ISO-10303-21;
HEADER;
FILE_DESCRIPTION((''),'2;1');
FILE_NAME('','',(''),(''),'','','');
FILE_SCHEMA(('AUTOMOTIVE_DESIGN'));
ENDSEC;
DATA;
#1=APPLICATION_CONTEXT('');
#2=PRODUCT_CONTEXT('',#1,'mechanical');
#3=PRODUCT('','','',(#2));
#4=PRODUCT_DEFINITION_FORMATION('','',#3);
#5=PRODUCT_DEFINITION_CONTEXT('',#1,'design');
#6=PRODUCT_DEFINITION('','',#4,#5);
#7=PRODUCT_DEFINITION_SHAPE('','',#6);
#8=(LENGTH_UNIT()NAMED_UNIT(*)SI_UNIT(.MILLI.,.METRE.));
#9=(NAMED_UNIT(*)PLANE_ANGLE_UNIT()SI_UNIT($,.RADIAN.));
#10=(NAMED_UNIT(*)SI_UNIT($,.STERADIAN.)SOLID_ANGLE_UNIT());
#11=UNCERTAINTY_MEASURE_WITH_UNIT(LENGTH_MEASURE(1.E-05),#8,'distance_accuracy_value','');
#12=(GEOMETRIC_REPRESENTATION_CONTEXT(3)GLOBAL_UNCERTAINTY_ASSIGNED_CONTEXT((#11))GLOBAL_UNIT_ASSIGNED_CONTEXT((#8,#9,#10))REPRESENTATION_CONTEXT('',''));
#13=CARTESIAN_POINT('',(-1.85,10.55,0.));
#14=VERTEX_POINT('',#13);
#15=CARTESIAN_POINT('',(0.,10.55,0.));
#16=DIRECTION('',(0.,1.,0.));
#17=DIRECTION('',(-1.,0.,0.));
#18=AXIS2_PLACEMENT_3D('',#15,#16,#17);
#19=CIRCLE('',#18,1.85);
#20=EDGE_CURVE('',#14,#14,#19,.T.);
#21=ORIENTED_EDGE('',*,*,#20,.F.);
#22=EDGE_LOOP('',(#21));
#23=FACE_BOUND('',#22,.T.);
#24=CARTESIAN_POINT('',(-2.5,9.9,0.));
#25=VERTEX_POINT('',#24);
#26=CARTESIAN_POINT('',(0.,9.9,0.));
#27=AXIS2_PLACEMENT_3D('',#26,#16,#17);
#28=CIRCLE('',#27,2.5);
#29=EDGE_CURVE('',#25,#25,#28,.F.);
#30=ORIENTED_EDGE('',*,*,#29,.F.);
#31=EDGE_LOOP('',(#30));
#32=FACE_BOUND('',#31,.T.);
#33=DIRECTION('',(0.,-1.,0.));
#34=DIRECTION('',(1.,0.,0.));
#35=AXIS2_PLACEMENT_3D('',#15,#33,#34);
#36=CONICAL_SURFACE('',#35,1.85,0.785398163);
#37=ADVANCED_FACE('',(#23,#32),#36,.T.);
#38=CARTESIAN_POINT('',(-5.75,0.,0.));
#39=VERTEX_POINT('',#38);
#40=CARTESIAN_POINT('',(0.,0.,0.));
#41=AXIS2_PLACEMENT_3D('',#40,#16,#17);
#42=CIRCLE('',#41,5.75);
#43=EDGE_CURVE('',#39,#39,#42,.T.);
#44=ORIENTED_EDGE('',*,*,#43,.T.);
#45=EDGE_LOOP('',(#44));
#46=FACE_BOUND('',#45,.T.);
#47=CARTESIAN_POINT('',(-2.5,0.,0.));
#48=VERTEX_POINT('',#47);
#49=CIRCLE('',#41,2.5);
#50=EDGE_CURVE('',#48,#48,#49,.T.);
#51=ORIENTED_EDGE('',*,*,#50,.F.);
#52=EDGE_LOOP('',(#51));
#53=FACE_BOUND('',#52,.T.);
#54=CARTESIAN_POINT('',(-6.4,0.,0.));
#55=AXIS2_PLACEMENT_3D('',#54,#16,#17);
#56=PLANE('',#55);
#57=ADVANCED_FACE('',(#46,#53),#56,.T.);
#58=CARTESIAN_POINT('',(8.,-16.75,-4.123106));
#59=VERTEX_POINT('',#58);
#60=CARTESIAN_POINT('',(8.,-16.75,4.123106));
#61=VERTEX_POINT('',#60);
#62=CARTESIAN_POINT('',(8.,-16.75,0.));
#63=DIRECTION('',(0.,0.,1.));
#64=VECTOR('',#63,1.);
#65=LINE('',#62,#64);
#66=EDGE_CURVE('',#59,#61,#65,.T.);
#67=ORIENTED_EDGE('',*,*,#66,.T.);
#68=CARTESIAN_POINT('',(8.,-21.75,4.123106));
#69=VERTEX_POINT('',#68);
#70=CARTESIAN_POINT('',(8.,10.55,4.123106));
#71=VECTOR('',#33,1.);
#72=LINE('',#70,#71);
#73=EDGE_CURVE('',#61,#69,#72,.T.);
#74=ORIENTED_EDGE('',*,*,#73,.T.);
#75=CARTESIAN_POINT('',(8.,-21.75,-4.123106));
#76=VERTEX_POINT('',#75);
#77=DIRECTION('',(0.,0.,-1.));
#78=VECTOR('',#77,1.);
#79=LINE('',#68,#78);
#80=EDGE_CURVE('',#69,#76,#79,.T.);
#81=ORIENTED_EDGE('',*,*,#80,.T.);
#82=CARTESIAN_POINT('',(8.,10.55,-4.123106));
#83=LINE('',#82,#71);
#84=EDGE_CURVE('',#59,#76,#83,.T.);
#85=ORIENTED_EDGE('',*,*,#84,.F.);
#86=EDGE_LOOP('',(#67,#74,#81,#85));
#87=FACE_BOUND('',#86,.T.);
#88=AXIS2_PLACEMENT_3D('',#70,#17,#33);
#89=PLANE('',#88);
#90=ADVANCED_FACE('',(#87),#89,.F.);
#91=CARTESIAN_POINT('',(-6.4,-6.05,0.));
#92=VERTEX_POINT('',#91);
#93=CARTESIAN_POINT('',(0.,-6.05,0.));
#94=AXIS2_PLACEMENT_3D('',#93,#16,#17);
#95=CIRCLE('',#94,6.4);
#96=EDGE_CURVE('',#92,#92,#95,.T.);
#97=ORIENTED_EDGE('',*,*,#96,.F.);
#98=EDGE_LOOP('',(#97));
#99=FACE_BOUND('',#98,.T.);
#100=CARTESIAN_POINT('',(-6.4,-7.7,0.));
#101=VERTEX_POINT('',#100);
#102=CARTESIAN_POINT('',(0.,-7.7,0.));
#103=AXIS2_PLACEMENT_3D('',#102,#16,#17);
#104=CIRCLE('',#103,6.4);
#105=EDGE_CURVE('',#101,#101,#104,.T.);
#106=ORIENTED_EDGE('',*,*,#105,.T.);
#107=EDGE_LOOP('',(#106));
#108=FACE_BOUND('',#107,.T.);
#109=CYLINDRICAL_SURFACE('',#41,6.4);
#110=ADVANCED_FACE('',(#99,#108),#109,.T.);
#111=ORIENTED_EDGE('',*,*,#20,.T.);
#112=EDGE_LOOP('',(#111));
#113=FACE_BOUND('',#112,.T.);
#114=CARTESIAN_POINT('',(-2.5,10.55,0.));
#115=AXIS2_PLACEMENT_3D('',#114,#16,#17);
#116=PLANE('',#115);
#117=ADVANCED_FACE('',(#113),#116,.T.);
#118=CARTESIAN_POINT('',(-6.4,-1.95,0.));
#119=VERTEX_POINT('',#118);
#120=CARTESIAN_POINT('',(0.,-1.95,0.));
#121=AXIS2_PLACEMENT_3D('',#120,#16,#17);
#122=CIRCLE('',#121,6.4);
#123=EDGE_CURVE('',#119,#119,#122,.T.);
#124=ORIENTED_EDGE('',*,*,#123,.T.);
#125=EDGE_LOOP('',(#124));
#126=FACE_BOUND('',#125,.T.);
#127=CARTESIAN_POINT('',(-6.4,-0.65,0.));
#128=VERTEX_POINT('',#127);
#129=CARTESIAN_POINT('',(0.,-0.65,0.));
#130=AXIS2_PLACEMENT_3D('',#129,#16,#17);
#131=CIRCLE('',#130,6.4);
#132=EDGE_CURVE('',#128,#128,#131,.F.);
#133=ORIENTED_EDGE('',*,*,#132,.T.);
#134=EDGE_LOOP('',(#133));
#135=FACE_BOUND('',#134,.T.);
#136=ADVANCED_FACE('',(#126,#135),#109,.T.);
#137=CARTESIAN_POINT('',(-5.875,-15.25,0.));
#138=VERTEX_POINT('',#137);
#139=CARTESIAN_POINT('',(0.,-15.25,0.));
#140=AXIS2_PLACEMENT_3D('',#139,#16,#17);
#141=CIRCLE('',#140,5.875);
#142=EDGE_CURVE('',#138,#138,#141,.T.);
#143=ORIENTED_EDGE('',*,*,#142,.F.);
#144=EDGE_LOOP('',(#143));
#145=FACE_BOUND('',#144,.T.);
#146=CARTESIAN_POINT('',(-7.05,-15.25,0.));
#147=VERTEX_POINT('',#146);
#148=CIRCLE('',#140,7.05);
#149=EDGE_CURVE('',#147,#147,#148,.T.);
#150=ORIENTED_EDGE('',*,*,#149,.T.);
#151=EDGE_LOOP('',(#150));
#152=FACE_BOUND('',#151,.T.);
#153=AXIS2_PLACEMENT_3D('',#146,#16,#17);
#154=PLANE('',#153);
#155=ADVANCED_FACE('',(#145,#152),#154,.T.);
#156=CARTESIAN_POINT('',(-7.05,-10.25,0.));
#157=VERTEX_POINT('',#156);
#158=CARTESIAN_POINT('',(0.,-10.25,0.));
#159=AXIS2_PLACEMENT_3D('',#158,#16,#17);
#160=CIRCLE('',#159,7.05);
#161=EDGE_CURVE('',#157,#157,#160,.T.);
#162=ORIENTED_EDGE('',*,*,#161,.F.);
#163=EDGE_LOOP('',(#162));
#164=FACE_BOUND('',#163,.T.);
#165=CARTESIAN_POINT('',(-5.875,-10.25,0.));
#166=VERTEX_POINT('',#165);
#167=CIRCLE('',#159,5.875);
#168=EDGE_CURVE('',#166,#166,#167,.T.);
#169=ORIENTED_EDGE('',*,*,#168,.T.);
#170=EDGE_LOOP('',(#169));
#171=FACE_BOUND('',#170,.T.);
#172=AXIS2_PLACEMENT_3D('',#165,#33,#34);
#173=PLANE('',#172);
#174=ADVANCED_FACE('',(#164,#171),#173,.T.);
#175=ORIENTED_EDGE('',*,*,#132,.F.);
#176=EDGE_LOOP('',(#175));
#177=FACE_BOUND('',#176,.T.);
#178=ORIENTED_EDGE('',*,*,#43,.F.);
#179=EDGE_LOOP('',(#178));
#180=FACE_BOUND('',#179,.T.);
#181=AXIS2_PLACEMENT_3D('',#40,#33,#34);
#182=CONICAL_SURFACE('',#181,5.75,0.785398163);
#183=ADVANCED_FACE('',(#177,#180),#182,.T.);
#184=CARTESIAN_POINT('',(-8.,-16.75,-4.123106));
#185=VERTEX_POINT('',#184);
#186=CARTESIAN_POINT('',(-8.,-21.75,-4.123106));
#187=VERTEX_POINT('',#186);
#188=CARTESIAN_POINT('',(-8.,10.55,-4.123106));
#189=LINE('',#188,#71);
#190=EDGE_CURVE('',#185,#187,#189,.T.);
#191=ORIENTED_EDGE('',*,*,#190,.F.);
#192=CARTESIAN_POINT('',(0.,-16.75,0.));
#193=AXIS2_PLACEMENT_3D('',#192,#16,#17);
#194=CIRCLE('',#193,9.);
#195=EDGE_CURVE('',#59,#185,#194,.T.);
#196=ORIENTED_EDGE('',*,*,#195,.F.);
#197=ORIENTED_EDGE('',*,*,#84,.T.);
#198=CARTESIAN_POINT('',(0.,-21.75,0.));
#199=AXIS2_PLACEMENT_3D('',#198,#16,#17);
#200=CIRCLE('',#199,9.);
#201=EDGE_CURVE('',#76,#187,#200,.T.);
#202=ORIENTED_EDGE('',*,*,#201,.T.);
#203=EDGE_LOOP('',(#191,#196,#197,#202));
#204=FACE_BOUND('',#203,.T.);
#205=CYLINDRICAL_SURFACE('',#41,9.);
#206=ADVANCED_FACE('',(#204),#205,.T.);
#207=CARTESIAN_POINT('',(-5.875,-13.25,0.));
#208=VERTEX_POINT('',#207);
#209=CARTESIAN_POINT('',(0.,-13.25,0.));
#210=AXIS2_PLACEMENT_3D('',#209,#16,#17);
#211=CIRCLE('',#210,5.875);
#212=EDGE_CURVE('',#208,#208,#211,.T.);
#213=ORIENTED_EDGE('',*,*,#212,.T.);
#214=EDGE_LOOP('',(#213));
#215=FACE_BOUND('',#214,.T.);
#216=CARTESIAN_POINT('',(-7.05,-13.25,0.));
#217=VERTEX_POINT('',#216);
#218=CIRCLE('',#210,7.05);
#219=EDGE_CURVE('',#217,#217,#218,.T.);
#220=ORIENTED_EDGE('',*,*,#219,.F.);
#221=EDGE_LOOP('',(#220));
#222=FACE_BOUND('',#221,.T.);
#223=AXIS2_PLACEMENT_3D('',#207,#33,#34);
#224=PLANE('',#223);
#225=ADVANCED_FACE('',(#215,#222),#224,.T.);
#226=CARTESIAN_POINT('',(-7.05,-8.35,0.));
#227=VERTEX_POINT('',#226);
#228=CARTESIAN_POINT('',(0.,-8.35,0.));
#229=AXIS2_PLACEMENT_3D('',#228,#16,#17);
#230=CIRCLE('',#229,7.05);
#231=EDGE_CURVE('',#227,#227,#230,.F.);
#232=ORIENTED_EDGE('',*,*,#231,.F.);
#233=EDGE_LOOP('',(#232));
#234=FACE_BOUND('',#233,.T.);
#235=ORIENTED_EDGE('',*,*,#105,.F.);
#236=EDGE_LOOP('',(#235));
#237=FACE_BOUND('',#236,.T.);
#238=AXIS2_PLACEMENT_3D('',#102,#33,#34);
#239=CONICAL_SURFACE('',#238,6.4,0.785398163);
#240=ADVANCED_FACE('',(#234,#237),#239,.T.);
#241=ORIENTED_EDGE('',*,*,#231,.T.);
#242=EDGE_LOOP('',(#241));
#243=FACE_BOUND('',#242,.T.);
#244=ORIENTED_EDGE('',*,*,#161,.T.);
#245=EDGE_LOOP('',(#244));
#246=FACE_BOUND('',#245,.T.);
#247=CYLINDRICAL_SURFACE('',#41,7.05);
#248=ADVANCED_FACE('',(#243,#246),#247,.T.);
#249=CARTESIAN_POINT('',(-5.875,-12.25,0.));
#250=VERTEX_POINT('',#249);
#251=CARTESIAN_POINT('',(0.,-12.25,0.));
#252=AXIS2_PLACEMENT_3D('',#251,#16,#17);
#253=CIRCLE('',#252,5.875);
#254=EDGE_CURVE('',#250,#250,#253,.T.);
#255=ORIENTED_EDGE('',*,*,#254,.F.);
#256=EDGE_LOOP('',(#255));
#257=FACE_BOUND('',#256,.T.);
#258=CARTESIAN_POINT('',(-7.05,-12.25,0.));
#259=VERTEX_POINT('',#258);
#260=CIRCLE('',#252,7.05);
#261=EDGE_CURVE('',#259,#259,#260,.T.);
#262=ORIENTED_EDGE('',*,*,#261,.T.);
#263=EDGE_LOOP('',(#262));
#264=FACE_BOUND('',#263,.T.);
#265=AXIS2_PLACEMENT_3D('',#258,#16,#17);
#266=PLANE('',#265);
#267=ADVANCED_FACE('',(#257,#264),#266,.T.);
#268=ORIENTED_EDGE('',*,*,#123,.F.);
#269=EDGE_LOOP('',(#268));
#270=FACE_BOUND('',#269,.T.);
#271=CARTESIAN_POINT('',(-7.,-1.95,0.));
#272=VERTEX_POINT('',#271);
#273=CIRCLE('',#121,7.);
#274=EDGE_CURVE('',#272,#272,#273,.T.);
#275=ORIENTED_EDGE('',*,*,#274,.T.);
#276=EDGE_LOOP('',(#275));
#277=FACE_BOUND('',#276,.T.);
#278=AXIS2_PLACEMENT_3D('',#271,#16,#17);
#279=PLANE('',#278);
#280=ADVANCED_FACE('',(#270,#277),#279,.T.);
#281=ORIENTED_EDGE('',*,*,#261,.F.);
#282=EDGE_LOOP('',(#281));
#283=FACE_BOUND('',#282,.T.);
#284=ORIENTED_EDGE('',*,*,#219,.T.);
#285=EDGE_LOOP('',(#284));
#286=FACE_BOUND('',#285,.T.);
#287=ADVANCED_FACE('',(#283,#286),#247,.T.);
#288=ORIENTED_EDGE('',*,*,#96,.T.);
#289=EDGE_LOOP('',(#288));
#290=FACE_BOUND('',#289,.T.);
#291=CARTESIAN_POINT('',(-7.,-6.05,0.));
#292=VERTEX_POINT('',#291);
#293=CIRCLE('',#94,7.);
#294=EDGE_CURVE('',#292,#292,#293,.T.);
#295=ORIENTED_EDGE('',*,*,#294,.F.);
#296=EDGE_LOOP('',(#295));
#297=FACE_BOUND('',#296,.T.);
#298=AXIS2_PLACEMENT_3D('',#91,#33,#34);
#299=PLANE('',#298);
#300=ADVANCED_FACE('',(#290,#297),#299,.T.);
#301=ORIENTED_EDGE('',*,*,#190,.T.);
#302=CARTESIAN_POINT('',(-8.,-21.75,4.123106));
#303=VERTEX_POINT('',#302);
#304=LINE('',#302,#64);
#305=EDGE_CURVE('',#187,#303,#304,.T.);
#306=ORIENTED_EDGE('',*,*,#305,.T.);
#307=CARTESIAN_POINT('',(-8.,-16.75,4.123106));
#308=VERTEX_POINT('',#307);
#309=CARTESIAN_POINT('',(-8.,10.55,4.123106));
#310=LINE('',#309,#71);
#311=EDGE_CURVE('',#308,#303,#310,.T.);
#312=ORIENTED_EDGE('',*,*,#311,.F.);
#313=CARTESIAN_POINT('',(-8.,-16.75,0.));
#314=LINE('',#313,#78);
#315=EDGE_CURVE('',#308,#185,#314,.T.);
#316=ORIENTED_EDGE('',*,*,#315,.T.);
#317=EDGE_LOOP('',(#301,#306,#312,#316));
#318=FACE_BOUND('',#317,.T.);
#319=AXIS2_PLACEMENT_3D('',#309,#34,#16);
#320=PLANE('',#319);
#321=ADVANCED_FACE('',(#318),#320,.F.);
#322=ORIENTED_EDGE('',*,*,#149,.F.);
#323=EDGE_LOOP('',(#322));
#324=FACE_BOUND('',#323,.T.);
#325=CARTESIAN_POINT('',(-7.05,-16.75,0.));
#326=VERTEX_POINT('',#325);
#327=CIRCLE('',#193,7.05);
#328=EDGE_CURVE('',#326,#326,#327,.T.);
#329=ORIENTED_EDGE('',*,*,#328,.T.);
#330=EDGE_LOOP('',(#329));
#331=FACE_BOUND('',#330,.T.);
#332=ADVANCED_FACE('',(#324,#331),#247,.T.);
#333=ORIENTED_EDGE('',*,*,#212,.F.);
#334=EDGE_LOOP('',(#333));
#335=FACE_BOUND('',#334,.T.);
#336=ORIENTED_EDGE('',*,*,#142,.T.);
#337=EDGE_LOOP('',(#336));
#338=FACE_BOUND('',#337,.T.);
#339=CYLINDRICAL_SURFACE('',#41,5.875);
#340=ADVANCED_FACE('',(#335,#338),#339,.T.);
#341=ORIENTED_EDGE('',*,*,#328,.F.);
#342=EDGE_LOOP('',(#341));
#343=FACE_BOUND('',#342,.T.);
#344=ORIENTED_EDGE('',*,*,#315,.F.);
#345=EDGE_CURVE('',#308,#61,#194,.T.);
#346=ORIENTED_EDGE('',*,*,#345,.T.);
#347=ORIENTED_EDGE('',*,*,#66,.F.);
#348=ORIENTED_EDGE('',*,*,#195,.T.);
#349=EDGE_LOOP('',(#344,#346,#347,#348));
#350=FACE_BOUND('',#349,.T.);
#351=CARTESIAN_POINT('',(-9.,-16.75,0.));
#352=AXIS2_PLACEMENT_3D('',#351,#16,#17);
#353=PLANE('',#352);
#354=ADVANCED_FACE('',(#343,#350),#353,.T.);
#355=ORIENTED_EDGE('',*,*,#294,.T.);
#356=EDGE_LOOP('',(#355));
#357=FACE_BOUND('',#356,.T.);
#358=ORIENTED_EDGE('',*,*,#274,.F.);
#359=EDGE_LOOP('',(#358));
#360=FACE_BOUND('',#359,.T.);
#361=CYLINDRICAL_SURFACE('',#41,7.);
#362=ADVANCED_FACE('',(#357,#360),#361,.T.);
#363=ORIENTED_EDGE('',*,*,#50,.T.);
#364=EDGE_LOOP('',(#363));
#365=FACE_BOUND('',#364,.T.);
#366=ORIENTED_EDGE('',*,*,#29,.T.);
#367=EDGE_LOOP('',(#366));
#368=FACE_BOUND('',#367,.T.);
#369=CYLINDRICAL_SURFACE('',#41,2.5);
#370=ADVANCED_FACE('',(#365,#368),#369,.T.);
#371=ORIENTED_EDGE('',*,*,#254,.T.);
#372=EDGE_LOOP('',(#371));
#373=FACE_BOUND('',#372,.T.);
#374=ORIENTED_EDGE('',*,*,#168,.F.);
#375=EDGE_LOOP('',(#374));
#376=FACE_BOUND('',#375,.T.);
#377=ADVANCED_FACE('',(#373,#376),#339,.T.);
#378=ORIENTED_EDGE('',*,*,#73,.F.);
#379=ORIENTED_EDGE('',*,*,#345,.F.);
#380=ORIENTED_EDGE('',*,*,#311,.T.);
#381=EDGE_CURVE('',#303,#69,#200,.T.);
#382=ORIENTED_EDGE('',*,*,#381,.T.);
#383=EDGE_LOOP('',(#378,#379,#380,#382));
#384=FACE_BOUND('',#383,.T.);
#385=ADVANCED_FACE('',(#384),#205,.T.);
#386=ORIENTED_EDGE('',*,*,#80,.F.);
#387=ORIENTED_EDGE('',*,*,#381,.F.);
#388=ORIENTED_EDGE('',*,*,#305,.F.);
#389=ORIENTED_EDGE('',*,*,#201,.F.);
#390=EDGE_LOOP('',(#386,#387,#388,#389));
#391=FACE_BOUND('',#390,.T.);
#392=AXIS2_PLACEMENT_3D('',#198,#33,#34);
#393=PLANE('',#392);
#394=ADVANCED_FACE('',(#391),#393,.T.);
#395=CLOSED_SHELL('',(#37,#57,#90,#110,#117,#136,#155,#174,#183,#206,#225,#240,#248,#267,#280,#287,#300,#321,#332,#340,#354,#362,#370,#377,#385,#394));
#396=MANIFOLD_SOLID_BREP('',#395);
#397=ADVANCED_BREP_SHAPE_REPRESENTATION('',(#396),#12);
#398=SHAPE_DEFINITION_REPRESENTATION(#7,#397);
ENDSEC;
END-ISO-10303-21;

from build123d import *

# Parameters (mm, degrees)
ENL_V_MAT_EXTRU_1_DEPTH = 35.71728676
CHANFREIN1_SIZE         = 0.65


with BuildPart() as part:
    # Esquisse1 → Révolution1 (revolve)
    with BuildSketch(Plane.XY):
        Polygon((0, -21.75), (-9, -21.75), (-9, -16.75), (-7.05, -16.75), (-7.05, -15.25), (-5.875, -15.25), (-5.875, -13.25), (-7.05, -13.25), (-7.05, -12.25), (-5.875, -12.25), (-5.875, -10.25), (-7.05, -10.25), (-7.05, -7.7), (-6.4, -7.7), (-6.4, -6.05), (-7, -6.05), (-7, -1.95), (-6.4, -1.95), (-6.4, 0), (-2.5, 0), (-2.5, 10.55), (0, 10.55), (0, 0), align=None)
    revolve(axis=Axis((0, 0, 0), (0, -1, 0)))

    # Esquisse2 → Enlèv. mat.-Extru.1 (cut, through all)
    with BuildSketch(Plane.XZ.offset(21.75)):
        with BuildLine():
            Line((8, 4.123105626), (8, -4.123105626))
            ThreePointArc((8, -4.123105626), (9, 0), (8, 4.123105626))
        make_face()
        with BuildLine():
            Line((-8, 4.123105626), (-8, -4.123105626))
            ThreePointArc((-8, -4.123105626), (-9, 0), (-8, 4.123105626))
        make_face()
    extrude(amount=-ENL_V_MAT_EXTRU_1_DEPTH, mode=Mode.SUBTRACT)

    # Chanfrein1
    chanfrein1_edges = [part.edges().sort_by_distance(p)[0] for p in [
        (2.5, 10.55, 0),
        (6.4, 0, 0),
        (7.05, -7.7, 0),
    ]]
    chamfer(chanfrein1_edges, length=CHANFREIN1_SIZE - 0.0001)  # a hair under: the kernel refuses the full size


solid = part.part
